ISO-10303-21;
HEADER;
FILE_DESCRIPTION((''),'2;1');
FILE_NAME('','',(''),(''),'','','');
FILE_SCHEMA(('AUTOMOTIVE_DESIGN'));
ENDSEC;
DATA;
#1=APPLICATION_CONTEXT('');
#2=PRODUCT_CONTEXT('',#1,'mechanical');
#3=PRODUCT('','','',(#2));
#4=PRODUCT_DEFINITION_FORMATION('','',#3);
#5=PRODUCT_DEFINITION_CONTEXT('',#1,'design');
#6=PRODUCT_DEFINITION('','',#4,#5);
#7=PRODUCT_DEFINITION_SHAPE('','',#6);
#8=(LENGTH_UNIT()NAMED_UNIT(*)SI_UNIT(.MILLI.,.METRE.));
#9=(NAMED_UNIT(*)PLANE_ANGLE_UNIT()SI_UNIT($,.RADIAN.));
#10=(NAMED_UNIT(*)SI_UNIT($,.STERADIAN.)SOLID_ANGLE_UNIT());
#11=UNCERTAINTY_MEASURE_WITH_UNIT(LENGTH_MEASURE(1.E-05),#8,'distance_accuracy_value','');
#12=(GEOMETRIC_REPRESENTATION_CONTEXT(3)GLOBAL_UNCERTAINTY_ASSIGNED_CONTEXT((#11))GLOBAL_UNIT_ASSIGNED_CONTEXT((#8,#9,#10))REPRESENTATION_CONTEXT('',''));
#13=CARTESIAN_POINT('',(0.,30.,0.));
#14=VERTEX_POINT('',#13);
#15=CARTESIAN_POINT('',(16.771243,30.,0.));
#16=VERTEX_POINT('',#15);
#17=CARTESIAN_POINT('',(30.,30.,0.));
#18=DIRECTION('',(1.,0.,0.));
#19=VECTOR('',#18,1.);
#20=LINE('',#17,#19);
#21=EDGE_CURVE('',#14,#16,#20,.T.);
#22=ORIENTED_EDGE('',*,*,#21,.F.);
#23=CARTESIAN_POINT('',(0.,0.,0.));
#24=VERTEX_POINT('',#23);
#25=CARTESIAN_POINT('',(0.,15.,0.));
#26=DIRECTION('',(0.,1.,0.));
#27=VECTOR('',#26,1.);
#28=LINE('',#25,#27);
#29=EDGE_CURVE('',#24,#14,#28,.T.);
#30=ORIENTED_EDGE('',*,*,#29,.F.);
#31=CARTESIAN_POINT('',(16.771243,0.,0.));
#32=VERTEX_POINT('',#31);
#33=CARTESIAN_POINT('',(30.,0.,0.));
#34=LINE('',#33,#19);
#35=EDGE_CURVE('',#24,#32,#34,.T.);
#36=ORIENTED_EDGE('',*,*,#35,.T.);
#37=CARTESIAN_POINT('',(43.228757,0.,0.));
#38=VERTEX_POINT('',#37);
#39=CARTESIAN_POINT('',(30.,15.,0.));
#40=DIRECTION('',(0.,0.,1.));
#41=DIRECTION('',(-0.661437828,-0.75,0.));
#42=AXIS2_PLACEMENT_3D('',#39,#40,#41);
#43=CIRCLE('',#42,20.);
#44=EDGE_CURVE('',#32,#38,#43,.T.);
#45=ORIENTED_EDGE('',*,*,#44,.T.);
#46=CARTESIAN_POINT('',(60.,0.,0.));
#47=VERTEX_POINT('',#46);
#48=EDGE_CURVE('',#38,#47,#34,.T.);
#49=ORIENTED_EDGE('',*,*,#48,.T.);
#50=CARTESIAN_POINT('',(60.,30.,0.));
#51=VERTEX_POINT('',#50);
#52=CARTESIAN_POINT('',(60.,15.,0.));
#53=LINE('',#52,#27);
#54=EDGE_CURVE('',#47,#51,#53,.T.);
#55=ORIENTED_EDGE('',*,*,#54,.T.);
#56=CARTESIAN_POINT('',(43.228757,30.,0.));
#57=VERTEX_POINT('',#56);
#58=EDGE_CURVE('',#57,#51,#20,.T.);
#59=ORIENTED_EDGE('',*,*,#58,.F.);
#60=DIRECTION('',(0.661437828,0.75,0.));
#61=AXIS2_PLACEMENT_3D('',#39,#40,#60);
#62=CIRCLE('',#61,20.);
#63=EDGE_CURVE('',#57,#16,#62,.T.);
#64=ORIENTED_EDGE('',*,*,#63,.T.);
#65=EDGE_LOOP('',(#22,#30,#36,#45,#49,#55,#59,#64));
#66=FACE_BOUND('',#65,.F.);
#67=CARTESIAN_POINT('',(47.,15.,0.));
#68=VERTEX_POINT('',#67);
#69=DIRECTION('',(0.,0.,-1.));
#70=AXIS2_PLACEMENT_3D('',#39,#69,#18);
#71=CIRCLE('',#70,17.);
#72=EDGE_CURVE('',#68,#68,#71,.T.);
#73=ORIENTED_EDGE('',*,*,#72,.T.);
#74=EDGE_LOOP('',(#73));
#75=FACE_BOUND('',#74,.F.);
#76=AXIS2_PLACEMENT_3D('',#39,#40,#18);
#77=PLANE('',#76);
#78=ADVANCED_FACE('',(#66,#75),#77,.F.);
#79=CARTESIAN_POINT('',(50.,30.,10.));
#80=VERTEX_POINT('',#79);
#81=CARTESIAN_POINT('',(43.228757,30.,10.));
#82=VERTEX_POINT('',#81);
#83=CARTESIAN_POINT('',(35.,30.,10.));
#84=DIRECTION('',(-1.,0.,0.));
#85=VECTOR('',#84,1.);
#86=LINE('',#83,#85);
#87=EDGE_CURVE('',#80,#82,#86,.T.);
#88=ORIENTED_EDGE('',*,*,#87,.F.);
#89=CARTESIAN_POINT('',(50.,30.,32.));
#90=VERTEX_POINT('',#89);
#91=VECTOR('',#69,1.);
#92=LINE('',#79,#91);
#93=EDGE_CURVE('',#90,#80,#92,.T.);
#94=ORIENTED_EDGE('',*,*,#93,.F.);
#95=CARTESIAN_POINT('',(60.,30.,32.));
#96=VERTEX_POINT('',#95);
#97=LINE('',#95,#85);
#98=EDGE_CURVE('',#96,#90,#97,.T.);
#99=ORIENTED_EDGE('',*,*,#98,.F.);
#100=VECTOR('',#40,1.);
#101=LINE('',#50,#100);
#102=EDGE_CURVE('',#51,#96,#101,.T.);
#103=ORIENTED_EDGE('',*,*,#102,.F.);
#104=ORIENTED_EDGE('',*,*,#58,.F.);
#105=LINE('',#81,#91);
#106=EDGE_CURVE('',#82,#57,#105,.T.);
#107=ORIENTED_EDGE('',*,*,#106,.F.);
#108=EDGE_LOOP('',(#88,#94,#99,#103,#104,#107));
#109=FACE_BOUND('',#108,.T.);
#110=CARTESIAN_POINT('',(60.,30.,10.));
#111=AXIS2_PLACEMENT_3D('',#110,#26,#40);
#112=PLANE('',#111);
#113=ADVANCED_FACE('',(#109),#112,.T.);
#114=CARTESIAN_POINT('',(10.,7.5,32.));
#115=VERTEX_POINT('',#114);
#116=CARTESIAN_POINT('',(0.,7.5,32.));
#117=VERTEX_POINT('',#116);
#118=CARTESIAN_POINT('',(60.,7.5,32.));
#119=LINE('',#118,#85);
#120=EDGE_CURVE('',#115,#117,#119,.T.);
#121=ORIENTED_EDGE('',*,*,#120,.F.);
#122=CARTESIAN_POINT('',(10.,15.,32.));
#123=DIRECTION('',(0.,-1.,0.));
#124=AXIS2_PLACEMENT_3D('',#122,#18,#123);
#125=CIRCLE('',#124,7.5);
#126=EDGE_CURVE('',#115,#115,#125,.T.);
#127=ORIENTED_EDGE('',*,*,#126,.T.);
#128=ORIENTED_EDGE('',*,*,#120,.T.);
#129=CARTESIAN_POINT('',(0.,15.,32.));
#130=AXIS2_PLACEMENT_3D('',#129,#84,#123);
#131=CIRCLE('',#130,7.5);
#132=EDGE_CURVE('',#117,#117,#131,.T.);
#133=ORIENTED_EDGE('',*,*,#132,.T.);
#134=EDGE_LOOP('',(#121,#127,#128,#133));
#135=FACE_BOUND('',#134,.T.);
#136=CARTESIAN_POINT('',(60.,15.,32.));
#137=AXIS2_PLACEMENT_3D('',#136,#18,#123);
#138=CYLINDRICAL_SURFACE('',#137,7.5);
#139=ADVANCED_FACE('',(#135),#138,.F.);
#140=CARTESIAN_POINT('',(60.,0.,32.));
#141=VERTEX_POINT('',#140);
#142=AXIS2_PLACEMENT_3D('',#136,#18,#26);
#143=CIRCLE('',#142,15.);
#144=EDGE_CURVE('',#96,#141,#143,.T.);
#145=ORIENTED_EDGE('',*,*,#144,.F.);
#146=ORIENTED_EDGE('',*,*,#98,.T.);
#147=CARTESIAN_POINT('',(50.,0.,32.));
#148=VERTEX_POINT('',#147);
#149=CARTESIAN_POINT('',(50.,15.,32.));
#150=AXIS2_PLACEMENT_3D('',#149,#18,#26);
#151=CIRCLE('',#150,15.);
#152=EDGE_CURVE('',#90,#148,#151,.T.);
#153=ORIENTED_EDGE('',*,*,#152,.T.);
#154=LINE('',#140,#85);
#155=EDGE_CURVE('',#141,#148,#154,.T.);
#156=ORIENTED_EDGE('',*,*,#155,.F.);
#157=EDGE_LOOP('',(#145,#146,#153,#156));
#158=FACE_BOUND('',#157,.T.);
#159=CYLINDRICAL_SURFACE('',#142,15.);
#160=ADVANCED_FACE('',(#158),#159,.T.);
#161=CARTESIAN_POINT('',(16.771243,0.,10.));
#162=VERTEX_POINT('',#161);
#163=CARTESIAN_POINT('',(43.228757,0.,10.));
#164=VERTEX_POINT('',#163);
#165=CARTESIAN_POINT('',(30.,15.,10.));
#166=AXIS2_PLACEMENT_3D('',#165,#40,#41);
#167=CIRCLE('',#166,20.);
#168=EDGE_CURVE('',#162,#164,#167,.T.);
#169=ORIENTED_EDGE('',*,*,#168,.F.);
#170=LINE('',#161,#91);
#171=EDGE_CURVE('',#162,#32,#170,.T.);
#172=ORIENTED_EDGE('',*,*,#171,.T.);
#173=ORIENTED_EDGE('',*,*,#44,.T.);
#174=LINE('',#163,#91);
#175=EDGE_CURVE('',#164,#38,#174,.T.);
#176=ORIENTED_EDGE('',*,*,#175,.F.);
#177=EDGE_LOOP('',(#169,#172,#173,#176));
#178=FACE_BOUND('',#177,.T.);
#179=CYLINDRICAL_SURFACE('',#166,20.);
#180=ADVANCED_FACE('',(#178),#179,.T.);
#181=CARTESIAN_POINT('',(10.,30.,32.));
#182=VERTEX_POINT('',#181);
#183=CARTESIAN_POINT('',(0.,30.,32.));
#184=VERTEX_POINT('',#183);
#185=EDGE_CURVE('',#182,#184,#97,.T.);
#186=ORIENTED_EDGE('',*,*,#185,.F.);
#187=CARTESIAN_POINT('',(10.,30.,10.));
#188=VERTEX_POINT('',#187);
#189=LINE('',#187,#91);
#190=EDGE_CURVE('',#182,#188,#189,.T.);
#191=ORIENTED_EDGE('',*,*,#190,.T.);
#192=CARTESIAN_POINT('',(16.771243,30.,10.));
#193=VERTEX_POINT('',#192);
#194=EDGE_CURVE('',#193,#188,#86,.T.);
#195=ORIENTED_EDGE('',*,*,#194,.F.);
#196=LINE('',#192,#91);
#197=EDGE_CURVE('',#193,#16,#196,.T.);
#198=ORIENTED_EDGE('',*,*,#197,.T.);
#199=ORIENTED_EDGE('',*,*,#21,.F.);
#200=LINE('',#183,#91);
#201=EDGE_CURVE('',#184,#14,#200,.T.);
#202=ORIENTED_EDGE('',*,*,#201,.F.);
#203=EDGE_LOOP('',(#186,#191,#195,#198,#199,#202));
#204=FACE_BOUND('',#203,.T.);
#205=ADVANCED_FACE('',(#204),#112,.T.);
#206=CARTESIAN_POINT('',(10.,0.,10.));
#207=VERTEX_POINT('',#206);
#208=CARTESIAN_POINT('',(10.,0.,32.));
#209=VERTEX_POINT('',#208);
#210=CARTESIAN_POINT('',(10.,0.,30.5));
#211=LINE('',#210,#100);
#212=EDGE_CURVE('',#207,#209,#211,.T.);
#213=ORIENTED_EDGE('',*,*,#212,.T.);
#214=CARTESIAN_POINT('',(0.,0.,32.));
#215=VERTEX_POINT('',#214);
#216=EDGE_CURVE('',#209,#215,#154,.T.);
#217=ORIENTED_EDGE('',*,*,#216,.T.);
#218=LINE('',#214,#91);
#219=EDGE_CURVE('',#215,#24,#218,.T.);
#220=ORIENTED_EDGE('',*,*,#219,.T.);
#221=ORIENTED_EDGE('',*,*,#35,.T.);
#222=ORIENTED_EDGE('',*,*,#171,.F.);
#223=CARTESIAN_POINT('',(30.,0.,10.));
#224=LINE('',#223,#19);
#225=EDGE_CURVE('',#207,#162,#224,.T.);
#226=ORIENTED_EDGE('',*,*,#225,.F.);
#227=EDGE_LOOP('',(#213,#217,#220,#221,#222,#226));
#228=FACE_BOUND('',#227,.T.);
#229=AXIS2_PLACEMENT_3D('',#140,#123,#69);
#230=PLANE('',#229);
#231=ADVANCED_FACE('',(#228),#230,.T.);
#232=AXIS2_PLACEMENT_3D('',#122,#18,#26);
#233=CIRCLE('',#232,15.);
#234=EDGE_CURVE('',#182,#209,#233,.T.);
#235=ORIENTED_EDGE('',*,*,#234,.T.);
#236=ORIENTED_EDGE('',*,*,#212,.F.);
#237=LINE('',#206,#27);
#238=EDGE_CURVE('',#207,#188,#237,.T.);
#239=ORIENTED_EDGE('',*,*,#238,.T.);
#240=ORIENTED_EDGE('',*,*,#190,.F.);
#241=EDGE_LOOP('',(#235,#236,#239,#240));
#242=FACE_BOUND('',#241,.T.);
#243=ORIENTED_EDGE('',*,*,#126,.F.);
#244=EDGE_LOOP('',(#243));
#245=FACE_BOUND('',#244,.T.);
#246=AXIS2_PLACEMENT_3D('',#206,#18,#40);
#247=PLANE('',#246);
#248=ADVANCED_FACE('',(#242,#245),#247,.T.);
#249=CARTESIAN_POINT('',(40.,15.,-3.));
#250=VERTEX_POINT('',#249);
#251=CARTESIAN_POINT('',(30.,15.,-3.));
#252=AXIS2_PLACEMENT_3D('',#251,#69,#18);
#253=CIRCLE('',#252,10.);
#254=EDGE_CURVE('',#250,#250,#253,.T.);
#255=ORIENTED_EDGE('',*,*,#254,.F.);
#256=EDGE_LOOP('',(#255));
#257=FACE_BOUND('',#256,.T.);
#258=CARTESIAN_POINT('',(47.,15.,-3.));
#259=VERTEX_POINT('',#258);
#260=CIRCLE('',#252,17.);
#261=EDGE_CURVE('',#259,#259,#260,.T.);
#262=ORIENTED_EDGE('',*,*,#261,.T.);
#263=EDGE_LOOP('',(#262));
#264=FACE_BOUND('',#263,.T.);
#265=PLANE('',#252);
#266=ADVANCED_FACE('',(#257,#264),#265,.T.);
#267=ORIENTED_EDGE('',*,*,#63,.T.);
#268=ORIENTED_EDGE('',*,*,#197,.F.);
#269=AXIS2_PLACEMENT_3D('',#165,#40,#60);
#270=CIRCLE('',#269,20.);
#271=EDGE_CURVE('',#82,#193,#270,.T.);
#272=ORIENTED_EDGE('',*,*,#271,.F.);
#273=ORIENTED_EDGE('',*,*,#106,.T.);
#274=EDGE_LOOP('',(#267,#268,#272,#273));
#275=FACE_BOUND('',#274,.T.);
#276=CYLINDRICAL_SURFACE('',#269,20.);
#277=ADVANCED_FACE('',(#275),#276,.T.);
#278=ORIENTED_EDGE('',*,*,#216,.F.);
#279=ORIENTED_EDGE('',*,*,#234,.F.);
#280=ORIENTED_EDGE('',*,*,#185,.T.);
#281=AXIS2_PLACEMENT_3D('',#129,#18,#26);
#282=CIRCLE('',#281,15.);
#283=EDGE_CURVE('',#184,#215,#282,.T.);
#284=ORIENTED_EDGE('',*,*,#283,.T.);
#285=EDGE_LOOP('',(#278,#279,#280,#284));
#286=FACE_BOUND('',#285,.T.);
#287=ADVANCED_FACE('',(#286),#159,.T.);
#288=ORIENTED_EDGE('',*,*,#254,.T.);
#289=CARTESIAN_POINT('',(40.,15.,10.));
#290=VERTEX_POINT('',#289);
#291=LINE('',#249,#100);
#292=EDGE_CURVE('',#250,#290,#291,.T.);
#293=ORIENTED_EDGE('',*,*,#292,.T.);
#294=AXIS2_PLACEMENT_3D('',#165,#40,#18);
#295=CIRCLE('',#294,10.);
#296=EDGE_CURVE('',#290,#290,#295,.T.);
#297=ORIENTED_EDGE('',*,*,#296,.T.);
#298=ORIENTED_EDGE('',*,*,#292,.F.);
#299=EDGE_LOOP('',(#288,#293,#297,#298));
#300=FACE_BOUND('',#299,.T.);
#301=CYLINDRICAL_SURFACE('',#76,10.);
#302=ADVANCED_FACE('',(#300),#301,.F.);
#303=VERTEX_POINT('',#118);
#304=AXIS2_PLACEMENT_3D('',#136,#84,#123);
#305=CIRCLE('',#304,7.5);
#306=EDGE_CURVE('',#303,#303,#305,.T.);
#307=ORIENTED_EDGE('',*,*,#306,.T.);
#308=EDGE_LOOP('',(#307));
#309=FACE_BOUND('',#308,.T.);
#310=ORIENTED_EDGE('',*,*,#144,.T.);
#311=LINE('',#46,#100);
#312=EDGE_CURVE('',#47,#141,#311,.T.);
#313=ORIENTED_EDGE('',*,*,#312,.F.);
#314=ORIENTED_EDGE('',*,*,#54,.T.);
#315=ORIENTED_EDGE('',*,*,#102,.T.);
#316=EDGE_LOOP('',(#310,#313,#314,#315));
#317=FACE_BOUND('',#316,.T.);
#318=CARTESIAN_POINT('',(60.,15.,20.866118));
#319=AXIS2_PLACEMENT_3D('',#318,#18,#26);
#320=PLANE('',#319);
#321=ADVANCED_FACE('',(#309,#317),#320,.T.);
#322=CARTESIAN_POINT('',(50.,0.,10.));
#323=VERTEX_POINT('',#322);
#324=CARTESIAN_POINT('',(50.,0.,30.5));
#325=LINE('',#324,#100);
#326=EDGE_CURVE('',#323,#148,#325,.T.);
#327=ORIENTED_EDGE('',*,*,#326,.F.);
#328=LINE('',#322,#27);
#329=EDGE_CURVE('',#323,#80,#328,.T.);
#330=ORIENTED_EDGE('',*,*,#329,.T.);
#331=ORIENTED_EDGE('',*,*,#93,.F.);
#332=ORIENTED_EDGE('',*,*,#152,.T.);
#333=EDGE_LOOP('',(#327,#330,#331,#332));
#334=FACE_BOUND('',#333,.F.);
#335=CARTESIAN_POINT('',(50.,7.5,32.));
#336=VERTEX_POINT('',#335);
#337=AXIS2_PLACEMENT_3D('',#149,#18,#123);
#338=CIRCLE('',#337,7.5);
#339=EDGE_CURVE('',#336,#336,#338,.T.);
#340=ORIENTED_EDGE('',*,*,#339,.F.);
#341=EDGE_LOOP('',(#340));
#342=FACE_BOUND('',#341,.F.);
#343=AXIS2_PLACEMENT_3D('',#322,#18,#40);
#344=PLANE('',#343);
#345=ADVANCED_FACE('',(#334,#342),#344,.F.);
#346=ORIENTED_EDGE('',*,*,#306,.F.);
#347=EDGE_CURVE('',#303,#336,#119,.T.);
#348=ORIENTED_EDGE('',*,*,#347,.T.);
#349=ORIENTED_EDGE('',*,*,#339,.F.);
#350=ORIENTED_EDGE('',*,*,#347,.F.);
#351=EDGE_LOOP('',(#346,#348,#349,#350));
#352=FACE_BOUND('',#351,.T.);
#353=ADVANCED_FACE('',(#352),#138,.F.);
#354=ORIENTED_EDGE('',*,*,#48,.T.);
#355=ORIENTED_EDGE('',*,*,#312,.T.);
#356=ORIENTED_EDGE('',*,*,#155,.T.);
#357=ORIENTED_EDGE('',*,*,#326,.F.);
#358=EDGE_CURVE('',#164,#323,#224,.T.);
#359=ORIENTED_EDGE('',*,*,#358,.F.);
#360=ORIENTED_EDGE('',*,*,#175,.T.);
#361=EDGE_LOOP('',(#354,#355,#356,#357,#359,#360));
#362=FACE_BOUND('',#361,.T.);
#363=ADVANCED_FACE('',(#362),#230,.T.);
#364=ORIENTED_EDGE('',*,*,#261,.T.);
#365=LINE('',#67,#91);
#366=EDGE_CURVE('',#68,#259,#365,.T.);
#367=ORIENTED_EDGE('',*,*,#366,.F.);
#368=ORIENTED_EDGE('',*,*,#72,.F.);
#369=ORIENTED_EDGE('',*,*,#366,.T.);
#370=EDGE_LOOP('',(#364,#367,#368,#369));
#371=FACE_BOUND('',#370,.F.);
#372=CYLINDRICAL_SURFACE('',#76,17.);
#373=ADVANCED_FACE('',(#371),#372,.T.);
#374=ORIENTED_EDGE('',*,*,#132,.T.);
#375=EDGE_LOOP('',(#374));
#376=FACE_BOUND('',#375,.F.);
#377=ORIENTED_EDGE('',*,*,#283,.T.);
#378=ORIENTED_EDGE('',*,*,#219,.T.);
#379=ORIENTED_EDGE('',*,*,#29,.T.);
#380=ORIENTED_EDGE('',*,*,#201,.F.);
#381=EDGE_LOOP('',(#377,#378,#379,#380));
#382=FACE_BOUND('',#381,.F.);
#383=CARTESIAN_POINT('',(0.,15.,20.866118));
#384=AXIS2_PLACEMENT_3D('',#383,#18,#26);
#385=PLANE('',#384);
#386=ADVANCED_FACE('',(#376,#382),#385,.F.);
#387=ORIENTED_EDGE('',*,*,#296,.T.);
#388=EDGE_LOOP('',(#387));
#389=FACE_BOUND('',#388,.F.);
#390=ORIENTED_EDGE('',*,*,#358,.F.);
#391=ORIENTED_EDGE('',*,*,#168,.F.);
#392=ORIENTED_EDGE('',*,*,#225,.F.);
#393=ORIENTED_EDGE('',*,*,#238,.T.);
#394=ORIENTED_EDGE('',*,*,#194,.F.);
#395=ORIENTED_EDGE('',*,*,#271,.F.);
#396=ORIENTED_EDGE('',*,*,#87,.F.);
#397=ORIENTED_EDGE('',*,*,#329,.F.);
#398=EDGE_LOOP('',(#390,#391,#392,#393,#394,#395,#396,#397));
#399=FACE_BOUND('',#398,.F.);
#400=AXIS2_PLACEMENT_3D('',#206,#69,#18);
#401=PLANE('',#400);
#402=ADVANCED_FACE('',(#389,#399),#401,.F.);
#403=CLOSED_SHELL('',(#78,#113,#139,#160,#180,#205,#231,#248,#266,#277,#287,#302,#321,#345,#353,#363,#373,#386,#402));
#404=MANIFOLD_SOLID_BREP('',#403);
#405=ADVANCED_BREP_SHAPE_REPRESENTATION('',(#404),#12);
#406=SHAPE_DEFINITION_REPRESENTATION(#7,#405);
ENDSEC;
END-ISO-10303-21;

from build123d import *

# Parameters (mm, degrees)
F0_W     = 60
F0_H     = 30
F0_R     = 10
F1_DEPTH = 10
F2_R     = 10
F3_DEPTH = 10
F4_R     = 17
F4_R_2   = 10
F5_DEPTH = 3
F7_DEPTH = 60
F8_W     = 40
F8_H     = 41
F9_DEPTH = 35.001


with BuildPart() as f1:
    # F0 (on Top) → F1 (new body)
    with BuildSketch(Plane.XY):
        with Locations((30, 15)):
            Rectangle(F0_W, F0_H)
        with Locations((30, 15)):
            Circle(F0_R, mode=Mode.SUBTRACT)
    extrude(amount=F1_DEPTH)

    # F2 (on face) → F3 (join)
    with BuildSketch(Plane.XY.offset(10)):
        with BuildLine():
            ThreePointArc((43.2287565553, 0), (48.2287565553, 6.7712434447), (50, 15))
            ThreePointArc((50, 15), (48.2287565553, 23.2287565553), (43.2287565553, 30))
            Line((43.2287565553, 30), (16.7712434447, 30))
            ThreePointArc((16.7712434447, 30), (11.7712434447, 23.2287565553), (10, 15))
            ThreePointArc((10, 15), (11.7712434447, 6.7712434447), (16.7712434447, 0))
            Line((16.7712434447, 0), (43.2287565553, 0))
        make_face()
        with Locations((30, 15)):
            Circle(F2_R, mode=Mode.SUBTRACT)
        with BuildLine():
            Line((16.7712434447, 30), (43.2287565553, 30))
            ThreePointArc((43.2287565553, 30), (30, 35), (16.7712434447, 30))
        make_face()
        with BuildLine():
            ThreePointArc((16.7712434447, 0), (30, -5), (43.2287565553, 0))
            Line((43.2287565553, 0), (16.7712434447, 0))
        make_face()
    extrude(amount=-F3_DEPTH)

    # F4 (on face) → F5 (join)
    with BuildSketch(Plane(origin=(0, 0, 0), x_dir=(1, 0, 0), z_dir=(0, 0, -1))):
        with Locations((30, -15)):
            Circle(F4_R)
        with Locations((30, -15)):
            Circle(F4_R_2, mode=Mode.SUBTRACT)
    extrude(amount=F5_DEPTH)

    # F6 (on face) → F7 (join, through all)
    with BuildSketch(Plane.YZ.offset(60)):
        with BuildLine():
            Line((0, 32), (0, 10))
            Line((0, 10), (30, 10))
            Line((30, 10), (30, 32))
            Line((30, 32), (22.5, 32))
            ThreePointArc((22.5, 32), (15, 24.5), (7.5, 32))
            Line((7.5, 32), (0, 32))
        make_face()
        with BuildLine():
            ThreePointArc((30, 32), (15, 47), (0, 32))
            Line((0, 32), (7.5, 32))
            ThreePointArc((7.5, 32), (15, 39.5), (22.5, 32))
            Line((22.5, 32), (30, 32))
        make_face()
    extrude(amount=-F7_DEPTH)

    # F8 (on Front) → F9 (cut, through all)
    with BuildSketch(Plane.XZ):
        with Locations((29.9999999726, 30.5)):
            Rectangle(F8_W, F8_H)
    extrude(amount=-F9_DEPTH, mode=Mode.SUBTRACT)


solid = f1.part
